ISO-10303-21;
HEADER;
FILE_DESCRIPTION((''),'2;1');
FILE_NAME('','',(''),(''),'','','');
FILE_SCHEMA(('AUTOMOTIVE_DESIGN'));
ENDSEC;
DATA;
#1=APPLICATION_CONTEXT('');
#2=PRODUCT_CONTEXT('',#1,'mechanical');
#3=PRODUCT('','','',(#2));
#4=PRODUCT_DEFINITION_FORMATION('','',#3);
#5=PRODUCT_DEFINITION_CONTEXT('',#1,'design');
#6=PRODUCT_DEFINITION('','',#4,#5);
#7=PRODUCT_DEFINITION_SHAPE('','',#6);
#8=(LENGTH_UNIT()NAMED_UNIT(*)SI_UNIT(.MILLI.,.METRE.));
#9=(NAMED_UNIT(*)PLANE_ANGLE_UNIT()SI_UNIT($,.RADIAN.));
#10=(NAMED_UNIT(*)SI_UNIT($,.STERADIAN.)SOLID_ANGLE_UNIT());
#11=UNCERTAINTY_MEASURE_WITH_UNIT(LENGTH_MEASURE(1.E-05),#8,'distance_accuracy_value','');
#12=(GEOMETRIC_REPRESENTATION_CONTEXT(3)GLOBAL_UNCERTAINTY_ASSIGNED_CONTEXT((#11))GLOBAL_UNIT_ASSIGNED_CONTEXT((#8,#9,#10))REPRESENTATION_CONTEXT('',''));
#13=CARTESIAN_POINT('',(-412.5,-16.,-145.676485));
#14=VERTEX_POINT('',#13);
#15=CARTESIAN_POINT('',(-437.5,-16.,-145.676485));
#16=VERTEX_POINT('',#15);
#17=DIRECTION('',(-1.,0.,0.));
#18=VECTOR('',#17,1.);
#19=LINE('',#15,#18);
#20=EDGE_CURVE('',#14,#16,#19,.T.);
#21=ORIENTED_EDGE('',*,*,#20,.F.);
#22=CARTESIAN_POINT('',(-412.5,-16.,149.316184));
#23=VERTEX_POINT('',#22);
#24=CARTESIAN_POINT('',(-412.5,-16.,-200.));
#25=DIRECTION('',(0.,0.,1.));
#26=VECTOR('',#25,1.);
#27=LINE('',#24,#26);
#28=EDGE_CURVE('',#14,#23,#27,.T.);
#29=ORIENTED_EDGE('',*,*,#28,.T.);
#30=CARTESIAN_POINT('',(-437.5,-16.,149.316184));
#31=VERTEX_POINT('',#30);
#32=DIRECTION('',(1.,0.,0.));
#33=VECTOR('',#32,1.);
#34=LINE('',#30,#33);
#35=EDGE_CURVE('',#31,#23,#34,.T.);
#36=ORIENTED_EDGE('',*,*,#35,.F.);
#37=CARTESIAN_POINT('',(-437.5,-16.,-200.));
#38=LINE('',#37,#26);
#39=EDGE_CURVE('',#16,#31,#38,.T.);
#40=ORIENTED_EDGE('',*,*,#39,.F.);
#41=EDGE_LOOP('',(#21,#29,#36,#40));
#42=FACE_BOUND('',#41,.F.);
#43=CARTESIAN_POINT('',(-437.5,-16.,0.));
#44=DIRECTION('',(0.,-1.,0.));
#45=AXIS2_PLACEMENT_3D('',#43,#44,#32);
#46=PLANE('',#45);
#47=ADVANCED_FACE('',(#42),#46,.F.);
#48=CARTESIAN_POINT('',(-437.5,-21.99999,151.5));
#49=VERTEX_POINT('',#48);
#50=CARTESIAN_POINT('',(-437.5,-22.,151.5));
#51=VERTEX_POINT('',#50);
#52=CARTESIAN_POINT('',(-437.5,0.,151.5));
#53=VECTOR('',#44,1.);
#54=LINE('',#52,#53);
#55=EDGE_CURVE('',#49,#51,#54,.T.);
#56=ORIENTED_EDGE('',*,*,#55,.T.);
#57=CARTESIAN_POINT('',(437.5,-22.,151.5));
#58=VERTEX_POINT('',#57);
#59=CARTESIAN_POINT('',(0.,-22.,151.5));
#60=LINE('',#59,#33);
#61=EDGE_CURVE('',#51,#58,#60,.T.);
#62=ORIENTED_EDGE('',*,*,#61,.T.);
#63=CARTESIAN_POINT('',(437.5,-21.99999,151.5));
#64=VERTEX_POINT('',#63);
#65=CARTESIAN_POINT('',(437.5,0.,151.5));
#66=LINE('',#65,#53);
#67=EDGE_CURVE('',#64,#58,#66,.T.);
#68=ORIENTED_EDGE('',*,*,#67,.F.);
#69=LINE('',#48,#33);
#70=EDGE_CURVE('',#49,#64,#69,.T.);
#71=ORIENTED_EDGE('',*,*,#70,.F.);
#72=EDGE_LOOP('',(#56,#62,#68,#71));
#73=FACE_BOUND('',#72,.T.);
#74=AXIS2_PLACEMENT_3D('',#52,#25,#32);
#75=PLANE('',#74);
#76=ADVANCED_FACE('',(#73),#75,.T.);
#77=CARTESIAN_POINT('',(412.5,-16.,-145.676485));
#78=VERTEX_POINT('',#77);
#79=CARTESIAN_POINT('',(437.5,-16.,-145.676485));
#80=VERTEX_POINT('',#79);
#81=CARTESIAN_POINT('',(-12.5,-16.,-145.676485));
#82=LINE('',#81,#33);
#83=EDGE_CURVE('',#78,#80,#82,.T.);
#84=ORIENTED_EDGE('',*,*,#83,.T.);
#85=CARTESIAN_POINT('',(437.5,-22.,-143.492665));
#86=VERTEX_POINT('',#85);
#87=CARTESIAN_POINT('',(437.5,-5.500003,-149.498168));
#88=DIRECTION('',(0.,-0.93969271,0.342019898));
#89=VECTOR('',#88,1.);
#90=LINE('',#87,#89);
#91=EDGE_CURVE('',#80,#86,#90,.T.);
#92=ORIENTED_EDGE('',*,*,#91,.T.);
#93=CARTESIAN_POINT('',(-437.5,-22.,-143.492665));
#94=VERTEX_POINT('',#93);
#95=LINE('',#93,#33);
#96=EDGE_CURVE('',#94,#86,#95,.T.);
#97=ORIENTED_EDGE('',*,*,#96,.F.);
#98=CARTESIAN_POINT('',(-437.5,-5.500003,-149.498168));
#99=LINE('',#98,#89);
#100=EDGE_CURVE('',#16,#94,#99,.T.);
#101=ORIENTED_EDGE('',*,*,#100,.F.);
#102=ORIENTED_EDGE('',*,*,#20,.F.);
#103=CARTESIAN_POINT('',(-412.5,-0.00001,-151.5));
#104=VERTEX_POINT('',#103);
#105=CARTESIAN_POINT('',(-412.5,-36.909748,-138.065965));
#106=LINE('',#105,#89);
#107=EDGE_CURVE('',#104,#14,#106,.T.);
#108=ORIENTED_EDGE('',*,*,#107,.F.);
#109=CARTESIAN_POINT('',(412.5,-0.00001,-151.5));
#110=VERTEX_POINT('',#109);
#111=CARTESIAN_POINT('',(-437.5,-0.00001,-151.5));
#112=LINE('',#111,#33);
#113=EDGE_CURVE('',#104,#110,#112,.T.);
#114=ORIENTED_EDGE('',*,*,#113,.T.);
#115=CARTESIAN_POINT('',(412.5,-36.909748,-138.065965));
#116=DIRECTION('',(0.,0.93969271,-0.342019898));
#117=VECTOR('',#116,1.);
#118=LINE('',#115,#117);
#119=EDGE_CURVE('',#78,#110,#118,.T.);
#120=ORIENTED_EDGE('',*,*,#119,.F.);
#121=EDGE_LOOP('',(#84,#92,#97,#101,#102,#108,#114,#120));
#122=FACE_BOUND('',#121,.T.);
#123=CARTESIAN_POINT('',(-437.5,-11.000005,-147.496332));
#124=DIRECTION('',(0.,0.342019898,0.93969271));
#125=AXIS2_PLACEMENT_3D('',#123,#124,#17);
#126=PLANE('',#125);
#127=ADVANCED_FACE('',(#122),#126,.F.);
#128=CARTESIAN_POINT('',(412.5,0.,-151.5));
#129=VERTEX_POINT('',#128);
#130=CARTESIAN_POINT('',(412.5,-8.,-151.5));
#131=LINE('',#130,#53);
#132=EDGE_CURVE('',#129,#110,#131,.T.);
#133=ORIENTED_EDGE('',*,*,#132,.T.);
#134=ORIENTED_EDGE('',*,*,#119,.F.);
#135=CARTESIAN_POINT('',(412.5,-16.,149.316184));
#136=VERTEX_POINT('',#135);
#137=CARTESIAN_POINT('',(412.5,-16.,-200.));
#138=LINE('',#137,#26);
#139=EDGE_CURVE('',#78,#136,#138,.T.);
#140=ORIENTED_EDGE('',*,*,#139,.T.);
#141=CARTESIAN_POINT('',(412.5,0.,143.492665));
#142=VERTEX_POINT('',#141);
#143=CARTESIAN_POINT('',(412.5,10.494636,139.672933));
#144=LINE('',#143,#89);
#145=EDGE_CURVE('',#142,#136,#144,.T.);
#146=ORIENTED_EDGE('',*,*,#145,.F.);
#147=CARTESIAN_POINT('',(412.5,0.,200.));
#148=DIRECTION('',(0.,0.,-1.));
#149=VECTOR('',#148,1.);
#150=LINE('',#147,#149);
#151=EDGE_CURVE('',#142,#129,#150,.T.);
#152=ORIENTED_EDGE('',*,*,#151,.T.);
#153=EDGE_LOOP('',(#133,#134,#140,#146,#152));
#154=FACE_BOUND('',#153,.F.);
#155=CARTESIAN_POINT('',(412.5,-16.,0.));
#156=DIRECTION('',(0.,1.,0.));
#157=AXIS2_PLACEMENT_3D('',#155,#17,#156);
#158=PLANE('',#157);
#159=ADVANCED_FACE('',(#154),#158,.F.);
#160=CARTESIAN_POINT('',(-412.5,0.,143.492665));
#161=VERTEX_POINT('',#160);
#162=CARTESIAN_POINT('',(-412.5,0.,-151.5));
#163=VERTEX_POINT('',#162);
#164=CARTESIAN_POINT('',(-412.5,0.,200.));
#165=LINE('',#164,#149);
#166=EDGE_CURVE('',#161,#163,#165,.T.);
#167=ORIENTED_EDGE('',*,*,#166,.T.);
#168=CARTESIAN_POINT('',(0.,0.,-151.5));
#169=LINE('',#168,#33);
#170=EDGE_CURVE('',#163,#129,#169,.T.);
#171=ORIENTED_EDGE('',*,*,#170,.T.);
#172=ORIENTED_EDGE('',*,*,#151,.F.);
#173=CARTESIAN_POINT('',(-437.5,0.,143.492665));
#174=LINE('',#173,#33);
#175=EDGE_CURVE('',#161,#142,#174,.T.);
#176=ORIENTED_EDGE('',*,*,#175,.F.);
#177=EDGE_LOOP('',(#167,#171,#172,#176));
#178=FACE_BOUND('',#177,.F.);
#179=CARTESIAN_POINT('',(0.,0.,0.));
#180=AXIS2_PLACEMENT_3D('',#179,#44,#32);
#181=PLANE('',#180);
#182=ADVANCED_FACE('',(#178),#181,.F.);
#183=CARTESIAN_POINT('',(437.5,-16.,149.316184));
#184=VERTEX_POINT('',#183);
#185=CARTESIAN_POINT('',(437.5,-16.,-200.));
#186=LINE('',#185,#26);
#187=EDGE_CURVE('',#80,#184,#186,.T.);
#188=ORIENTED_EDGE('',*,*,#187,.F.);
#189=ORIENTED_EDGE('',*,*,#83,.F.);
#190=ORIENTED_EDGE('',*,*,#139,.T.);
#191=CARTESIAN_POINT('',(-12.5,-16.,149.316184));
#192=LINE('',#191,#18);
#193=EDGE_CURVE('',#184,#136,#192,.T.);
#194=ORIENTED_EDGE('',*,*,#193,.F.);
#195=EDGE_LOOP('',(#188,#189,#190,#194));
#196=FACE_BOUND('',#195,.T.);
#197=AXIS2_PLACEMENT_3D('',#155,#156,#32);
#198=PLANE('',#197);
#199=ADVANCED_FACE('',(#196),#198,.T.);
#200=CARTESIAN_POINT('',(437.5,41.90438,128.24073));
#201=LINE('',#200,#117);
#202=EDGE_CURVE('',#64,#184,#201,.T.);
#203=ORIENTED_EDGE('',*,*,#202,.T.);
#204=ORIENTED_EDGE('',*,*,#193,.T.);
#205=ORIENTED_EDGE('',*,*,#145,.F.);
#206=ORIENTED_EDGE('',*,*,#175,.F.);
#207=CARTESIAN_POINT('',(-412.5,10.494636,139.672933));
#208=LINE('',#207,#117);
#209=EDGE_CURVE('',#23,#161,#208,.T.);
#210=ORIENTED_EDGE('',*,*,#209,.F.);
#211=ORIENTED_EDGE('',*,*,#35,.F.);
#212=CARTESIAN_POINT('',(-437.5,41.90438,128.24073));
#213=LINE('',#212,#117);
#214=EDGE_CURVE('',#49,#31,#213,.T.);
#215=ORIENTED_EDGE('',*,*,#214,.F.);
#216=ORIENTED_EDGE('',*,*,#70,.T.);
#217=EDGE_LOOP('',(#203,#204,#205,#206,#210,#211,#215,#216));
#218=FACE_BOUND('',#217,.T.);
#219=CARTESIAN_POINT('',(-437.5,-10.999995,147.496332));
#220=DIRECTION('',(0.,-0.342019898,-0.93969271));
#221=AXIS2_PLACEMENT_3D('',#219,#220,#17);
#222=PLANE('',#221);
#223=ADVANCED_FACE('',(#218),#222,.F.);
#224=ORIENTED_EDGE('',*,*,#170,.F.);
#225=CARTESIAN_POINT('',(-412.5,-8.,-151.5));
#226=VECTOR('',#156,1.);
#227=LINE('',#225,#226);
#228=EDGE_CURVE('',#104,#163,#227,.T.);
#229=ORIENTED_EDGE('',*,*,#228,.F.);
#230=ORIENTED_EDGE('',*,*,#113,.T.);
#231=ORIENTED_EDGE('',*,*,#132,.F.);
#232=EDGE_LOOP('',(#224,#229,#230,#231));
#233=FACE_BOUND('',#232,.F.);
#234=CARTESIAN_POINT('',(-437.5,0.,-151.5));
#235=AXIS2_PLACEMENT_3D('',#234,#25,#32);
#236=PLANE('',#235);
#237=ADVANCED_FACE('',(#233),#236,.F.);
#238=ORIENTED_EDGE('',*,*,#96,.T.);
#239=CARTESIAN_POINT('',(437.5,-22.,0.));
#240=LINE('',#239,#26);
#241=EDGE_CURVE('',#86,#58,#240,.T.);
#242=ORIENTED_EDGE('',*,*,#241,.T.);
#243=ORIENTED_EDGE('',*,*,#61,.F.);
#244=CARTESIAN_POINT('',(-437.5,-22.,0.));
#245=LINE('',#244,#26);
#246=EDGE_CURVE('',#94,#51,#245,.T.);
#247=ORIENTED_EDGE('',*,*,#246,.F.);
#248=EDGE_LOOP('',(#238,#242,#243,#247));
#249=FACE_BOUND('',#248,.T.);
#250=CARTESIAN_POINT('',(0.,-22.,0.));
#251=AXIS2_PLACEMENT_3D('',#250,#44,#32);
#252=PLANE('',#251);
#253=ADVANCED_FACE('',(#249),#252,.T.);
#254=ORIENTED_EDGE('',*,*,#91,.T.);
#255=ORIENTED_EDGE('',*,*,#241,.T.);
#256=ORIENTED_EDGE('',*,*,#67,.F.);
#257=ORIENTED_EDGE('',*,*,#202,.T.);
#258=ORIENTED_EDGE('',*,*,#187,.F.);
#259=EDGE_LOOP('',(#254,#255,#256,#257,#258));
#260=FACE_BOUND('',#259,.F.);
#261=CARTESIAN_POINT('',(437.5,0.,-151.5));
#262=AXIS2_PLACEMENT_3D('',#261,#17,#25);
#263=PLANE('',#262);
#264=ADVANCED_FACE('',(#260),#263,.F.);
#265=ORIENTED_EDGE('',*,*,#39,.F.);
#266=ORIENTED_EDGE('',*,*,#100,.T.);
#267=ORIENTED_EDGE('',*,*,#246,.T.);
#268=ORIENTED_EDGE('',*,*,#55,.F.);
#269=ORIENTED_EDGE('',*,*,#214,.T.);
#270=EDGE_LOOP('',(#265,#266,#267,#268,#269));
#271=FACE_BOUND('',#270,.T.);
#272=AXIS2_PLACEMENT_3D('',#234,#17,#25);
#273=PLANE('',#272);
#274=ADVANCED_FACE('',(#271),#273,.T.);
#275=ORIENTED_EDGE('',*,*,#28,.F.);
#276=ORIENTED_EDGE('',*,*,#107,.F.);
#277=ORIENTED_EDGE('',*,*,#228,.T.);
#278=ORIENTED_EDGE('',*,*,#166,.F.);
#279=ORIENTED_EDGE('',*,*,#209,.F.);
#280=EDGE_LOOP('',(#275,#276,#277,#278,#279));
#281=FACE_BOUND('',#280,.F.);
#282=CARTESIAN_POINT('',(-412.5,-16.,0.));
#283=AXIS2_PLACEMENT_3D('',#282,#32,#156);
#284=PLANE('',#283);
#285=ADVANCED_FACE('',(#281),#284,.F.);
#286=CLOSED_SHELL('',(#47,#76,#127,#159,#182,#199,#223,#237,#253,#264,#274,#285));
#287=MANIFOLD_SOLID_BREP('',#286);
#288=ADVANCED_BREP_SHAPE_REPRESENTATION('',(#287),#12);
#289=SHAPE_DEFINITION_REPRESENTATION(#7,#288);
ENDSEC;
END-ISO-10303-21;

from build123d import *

# Parameters (mm, degrees)
F0_W       = 875
F0_H       = 303
F1_DEPTH   = 22
F2_SIZE2   = 8.007335
F2_SIZE    = 21.99999
F2_2_SIZE2 = 8.007335
F2_2_SIZE  = 21.99999
F3_W       = 25
F3_H       = 16
F4_DEPTH   = 200


# Not quite as in the source:
# - a fillet or chamfer is up to 0.001 mm smaller than in the source, because OpenCascade refuses the exact size


with BuildPart() as f1:
    # F0 (on Front) → F1 (new body)
    with BuildSketch(Plane.XZ):
        Rectangle(F0_W, F0_H)
    extrude(amount=F1_DEPTH)

    # F2 (size 22 and 8.0073451539 in the source; OpenCascade refuses exactly that, so slightly less here)
    f2_edges = [f1.edges().sort_by_distance(p)[0] for p in [
        (0, -22, -151.5),
    ]]
    f2_side = f1.faces().sort_by_distance((0, -11, -151.5))[0]
    chamfer(f2_edges, length=F2_SIZE, length2=F2_SIZE2, reference=f2_side)

    # F2#2 (size 22 and 8.0073451539 in the source; OpenCascade refuses exactly that, so slightly less here)
    f2_2_edges = [f1.edges().sort_by_distance(p)[0] for p in [
        (0, 0, 151.5),
    ]]
    f2_2_side = f1.faces().sort_by_distance((0, -11, 151.5))[0]
    chamfer(f2_2_edges, length=F2_2_SIZE, length2=F2_2_SIZE2, reference=f2_2_side)

    # F3 (on Top) → F4 (cut, symmetric)
    with BuildSketch(Plane.XY):
        with Locations((425, -8)):
            Rectangle(F3_W, F3_H)
        with Locations((-425, -8)):
            Rectangle(F3_W, F3_H)
    extrude(amount=F4_DEPTH, both=True, mode=Mode.SUBTRACT)


solid = f1.part
